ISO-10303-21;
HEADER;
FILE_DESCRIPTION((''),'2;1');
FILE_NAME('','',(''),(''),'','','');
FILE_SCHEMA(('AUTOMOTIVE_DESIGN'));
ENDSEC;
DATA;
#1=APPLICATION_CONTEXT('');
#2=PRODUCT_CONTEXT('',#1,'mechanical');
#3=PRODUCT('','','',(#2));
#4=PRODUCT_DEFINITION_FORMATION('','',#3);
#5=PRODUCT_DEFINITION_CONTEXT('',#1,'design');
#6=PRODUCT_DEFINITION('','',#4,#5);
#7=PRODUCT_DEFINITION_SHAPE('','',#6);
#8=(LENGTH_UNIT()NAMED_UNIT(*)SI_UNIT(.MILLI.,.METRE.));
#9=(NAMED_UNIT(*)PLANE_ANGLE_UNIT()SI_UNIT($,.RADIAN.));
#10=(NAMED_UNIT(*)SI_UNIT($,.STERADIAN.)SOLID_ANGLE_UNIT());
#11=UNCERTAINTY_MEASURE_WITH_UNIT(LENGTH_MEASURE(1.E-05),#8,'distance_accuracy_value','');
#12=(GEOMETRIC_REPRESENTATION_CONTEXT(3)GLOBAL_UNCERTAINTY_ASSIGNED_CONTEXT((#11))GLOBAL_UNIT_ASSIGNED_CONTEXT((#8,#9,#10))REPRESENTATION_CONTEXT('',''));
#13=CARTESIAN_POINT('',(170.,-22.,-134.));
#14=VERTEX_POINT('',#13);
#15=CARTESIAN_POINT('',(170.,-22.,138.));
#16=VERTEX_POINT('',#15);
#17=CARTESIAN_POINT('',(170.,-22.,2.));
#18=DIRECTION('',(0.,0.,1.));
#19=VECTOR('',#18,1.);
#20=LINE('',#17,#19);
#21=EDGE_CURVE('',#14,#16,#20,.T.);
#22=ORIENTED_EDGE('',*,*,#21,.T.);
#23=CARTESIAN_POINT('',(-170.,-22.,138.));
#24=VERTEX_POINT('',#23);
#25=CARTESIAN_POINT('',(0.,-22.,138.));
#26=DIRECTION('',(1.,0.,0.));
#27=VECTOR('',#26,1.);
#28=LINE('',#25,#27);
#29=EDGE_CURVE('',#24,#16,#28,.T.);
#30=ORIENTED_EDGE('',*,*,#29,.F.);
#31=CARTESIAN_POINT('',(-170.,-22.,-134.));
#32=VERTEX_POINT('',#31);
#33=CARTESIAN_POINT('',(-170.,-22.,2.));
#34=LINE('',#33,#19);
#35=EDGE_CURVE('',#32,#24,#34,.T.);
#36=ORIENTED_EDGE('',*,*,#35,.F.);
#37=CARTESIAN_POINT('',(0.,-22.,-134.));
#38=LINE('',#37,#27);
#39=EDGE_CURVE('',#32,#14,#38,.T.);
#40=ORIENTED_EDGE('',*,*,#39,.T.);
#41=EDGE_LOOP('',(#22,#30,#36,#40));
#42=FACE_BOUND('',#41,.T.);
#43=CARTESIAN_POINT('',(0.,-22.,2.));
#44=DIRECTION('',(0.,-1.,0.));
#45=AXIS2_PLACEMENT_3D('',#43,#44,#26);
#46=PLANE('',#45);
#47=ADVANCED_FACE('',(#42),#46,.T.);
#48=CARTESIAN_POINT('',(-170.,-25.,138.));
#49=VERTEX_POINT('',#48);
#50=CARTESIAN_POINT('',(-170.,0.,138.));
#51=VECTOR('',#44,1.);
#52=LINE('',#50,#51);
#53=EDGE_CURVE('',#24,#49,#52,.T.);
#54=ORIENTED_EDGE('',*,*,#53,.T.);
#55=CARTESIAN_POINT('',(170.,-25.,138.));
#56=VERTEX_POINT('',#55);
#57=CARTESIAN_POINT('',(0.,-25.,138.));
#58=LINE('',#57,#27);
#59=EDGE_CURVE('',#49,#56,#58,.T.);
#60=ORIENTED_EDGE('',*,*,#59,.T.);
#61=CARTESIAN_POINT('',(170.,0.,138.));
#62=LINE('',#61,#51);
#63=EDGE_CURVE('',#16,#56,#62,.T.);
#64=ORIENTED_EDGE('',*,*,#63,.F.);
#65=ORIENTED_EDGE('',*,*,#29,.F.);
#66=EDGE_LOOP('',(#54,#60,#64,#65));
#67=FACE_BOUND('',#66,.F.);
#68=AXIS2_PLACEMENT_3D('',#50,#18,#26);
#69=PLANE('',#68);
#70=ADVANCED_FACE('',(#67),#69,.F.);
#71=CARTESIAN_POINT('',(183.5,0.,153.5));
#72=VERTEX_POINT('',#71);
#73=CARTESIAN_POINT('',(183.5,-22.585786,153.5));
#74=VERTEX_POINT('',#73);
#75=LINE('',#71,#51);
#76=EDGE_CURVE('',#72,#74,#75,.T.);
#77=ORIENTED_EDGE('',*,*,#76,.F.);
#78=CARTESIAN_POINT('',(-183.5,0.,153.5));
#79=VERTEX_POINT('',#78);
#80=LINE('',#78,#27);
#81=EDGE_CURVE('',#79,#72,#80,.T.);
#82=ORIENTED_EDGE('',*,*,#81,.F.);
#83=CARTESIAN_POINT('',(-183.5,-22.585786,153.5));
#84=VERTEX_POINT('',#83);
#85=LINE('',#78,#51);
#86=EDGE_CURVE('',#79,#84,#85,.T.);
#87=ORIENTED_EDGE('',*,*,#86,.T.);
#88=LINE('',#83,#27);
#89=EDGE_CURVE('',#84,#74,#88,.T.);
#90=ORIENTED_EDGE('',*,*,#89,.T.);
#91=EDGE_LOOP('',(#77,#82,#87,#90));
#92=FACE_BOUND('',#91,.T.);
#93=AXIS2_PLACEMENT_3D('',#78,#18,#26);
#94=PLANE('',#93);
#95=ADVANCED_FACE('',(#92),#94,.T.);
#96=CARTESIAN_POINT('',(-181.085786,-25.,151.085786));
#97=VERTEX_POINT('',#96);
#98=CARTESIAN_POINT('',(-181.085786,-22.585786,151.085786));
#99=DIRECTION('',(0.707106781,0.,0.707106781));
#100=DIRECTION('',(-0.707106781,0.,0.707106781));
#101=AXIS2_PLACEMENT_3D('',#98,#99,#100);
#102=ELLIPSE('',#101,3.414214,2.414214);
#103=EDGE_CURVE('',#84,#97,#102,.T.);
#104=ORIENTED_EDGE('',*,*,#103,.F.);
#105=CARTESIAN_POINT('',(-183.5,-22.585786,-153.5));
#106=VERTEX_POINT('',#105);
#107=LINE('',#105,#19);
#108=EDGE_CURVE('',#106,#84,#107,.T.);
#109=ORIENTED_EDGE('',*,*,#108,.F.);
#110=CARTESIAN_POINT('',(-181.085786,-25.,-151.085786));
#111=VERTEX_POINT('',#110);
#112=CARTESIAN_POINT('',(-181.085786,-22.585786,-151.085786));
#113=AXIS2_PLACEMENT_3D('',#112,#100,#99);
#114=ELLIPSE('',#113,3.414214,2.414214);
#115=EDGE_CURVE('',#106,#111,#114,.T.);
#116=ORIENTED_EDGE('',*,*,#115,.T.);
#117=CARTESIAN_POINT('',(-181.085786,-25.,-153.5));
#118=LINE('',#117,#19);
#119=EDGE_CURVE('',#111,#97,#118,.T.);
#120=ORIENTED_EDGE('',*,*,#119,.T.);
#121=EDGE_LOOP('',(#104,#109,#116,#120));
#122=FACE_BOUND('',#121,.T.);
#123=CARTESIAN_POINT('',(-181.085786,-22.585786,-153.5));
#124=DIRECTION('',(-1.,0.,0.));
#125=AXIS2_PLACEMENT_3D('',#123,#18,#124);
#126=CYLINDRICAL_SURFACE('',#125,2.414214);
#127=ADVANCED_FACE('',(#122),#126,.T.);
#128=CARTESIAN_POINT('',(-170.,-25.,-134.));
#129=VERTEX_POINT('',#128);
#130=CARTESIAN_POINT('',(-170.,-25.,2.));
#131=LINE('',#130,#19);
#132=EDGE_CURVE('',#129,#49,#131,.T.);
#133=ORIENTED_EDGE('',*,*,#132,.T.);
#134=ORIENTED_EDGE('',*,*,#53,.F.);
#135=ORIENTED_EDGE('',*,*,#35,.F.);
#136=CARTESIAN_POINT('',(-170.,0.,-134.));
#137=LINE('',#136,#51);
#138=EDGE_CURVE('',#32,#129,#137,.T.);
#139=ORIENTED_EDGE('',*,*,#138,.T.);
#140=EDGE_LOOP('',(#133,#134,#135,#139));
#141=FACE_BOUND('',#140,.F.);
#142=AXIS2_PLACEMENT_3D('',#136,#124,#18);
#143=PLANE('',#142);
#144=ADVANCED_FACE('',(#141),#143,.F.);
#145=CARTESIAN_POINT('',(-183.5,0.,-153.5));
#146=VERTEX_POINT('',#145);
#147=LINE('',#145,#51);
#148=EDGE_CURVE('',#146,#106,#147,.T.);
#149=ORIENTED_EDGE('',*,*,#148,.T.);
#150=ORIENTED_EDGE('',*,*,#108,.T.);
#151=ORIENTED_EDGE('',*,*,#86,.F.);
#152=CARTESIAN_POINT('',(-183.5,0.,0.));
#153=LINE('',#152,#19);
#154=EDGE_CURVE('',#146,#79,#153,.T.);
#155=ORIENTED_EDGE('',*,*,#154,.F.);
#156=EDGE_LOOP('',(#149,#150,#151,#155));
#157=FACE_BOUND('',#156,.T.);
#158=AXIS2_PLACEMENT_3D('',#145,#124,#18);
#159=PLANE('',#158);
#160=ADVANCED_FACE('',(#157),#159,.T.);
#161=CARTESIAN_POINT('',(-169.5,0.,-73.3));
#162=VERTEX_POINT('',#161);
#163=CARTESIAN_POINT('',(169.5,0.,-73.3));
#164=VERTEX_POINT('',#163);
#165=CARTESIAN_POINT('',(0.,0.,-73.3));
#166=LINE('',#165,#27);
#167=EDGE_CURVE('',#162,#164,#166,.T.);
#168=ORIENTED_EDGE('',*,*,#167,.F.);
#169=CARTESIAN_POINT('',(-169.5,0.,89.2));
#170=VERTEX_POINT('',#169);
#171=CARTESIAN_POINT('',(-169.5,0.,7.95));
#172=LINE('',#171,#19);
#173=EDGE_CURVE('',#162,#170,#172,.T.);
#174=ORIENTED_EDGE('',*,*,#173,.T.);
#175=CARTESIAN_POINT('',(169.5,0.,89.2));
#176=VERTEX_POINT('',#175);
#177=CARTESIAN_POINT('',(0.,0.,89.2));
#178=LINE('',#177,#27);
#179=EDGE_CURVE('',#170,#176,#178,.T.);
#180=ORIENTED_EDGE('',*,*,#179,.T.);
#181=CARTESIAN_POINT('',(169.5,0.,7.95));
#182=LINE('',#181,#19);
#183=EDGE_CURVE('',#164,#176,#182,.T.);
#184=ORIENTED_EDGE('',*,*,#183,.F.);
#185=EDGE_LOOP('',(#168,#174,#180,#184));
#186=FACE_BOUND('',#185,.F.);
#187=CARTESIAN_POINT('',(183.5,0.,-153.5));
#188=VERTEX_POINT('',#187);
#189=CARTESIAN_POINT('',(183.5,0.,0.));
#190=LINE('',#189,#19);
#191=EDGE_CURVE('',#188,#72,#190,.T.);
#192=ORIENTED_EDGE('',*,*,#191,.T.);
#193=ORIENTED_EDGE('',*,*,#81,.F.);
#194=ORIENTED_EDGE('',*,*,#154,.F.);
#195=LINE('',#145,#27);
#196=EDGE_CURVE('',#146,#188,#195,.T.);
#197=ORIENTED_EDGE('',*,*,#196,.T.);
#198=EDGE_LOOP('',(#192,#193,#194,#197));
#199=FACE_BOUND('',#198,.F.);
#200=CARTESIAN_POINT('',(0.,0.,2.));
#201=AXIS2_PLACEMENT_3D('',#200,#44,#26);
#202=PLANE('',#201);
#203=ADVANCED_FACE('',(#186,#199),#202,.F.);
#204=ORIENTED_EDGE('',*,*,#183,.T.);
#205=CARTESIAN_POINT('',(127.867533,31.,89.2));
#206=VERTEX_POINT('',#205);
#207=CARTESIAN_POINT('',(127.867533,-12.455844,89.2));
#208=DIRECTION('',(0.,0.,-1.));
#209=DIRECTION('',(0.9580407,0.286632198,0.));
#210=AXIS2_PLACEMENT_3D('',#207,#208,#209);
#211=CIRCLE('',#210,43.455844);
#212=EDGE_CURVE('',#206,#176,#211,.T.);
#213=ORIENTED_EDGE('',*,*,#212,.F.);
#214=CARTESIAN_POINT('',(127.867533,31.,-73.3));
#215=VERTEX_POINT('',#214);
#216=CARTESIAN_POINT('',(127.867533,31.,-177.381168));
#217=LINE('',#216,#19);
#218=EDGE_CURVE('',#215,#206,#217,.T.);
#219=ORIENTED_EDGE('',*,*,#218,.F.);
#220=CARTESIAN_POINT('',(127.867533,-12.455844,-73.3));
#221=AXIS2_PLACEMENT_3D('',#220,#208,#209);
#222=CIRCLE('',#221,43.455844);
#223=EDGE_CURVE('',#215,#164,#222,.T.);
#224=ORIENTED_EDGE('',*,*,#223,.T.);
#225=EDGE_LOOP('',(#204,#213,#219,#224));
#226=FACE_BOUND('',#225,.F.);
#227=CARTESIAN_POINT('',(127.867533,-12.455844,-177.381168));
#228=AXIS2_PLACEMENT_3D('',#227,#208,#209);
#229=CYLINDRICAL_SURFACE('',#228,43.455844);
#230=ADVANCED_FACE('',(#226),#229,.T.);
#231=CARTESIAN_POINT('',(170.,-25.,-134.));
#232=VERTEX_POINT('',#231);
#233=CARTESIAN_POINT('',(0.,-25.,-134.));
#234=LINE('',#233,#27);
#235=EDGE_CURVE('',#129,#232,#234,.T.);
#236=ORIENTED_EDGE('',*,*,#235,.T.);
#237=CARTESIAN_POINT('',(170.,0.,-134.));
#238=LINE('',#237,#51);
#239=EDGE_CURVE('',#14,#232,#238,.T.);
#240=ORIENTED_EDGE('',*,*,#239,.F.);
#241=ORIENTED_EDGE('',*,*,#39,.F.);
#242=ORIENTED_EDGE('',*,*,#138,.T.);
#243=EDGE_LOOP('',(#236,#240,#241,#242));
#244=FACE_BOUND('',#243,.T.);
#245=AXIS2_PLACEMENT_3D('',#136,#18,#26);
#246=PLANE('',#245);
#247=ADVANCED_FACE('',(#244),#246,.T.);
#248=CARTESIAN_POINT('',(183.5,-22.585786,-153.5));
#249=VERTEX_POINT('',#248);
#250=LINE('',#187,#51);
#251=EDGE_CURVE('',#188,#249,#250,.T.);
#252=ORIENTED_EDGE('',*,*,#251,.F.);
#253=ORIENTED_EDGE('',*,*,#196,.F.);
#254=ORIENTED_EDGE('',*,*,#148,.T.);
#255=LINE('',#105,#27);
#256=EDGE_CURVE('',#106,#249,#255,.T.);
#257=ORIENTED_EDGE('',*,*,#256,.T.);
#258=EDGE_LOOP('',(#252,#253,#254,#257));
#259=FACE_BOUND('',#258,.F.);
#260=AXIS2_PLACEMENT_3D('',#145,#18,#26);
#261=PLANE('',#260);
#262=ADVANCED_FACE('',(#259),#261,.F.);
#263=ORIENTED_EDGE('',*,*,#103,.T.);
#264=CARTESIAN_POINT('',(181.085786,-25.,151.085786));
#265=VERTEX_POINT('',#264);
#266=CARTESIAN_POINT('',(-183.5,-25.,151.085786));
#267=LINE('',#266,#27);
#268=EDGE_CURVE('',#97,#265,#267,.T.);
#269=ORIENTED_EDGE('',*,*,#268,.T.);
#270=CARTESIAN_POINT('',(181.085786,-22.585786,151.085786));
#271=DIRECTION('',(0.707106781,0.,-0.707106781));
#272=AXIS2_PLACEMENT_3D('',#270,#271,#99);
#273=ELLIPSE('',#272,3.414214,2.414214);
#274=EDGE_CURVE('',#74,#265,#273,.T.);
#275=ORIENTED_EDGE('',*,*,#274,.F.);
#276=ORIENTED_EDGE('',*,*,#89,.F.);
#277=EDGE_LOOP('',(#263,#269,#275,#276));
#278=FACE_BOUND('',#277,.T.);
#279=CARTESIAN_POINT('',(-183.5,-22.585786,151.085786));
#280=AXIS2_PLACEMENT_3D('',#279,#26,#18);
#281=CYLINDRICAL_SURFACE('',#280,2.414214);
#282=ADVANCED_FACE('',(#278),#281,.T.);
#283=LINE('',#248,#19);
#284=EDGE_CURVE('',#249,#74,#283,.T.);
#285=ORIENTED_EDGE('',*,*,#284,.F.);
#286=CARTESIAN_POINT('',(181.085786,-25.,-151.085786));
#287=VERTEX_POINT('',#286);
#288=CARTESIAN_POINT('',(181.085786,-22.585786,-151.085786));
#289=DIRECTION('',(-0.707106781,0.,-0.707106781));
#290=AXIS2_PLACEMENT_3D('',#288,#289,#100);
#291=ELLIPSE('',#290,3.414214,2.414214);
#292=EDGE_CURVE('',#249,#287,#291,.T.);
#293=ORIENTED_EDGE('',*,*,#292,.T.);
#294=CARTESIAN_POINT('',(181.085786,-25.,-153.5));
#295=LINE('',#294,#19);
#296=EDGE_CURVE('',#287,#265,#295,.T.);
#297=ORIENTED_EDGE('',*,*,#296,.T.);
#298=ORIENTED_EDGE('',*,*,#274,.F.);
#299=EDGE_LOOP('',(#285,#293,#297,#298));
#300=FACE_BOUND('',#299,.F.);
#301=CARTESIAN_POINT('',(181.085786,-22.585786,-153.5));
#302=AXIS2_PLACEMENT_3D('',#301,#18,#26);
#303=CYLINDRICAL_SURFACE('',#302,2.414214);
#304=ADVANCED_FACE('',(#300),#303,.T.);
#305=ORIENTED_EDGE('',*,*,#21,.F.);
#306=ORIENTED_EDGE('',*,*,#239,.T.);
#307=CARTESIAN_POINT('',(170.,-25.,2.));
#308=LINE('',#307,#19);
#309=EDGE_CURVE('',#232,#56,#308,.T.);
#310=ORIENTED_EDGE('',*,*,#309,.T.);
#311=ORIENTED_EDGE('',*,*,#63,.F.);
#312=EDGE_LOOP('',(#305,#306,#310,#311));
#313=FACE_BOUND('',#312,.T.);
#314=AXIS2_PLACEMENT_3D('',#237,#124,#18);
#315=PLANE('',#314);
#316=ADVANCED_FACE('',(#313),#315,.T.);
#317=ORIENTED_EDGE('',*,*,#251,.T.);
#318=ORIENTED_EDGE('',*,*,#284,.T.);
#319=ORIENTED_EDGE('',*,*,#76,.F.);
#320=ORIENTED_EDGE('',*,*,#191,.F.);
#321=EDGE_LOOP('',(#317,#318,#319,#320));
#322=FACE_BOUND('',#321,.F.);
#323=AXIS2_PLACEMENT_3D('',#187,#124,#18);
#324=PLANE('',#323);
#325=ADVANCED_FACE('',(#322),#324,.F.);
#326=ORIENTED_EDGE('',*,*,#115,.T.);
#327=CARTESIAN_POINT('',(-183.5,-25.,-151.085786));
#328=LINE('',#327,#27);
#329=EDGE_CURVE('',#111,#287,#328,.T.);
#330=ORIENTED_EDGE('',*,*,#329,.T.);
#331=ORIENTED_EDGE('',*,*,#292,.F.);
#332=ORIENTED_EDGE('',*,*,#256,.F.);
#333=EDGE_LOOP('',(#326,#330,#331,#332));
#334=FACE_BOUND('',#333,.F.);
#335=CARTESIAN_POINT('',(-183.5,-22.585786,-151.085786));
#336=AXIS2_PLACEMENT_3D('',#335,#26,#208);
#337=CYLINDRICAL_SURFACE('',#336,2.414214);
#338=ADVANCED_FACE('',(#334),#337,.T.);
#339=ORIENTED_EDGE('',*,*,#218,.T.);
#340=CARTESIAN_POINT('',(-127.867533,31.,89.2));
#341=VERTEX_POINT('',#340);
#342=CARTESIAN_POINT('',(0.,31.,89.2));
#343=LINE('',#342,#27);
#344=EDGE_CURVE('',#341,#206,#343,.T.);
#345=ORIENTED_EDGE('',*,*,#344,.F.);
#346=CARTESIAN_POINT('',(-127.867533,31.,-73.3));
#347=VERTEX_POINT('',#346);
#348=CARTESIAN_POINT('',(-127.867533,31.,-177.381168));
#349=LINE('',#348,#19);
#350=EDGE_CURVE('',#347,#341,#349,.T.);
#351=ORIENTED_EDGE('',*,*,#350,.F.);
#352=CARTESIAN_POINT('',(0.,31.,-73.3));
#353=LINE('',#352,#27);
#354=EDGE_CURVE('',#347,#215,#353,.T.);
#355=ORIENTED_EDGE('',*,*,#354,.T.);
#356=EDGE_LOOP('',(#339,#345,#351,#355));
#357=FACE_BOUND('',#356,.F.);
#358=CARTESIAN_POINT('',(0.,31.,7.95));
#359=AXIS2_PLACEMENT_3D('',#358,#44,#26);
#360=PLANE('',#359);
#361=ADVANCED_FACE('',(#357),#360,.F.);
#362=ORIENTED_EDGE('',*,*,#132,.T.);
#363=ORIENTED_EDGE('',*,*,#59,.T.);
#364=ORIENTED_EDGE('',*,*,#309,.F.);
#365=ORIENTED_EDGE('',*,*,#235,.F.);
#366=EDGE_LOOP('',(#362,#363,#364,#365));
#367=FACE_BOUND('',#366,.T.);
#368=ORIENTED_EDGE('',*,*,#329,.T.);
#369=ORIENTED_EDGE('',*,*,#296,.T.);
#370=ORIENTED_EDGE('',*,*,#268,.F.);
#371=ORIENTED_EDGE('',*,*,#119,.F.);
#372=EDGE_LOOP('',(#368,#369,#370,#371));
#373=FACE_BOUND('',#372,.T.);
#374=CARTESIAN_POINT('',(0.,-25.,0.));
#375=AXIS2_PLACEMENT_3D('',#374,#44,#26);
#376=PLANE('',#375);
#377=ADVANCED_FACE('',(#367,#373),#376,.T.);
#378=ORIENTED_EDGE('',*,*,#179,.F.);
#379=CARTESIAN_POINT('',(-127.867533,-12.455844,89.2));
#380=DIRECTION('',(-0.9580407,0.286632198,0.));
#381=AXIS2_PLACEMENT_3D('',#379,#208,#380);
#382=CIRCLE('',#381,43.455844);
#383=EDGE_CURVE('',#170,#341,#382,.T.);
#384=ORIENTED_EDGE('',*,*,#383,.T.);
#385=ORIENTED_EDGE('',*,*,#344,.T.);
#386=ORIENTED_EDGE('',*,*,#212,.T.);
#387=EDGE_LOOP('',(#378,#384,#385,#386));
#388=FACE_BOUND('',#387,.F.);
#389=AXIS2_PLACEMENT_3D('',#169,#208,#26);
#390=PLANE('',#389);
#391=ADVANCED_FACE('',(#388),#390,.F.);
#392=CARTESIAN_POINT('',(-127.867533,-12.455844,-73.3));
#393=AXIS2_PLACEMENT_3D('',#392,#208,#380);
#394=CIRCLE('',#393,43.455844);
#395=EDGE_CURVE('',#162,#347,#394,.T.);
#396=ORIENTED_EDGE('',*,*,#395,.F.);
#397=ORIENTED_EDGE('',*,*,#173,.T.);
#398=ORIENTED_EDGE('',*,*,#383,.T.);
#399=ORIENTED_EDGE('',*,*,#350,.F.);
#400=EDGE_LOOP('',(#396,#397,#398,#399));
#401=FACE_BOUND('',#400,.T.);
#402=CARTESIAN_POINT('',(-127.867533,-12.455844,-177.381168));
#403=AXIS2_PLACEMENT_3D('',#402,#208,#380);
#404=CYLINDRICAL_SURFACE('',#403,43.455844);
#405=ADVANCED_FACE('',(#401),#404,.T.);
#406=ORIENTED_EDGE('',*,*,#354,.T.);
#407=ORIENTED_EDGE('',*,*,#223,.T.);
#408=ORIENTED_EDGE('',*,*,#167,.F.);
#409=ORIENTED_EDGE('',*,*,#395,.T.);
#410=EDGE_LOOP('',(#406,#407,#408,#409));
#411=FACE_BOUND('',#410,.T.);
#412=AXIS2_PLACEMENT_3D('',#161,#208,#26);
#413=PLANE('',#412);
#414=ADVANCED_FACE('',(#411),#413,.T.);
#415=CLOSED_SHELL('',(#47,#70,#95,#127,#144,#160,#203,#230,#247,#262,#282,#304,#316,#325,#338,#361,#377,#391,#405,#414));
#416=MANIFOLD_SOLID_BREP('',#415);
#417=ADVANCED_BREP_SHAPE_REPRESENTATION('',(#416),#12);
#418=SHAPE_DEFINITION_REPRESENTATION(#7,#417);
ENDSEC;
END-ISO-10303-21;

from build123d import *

# Parameters (mm, degrees)
F0_W        = 367
F0_H        = 307
F0_W_2      = 340
F0_H_2      = 272
F1_DEPTH    = 25
F2_DEPTH    = 22
F3_R        = 2.4142135624
F4_W        = 339
F4_H        = 162.5
F5_DEPTH    = 31
F6_T1_DEPTH = 370.6623366275


# Not quite as in the source:
# - a fillet or chamfer that OpenCascade refuses, or shapes differently, is made with other operations: its cross-section is extruded or revolved along the edge and cut away or added


with BuildPart() as f1:
    # F0 (on Front) → F1 (new body)
    with BuildSketch(Plane.XZ):
        Rectangle(F0_W, F0_H)
        with Locations((0, 2)):
            Rectangle(F0_W_2, F0_H_2, mode=Mode.SUBTRACT)
    extrude(amount=F1_DEPTH)

    # F0 (on Front) → F2 (join)
    with BuildSketch(Plane.XZ):
        with Locations((0, 2)):
            Rectangle(F0_W_2, F0_H_2)
    extrude(amount=F2_DEPTH)

    # F3
    f3_edges = [f1.edges().sort_by_distance(p)[0] for p in [
        (-183.5, -25, 0),
        (183.5, -25, 0),
        (0, -25, 153.5),
        (0, -25, -153.5),
    ]]
    fillet(f3_edges, radius=F3_R)

    # F4 (on face) → F5 (join)
    with BuildSketch(Plane.XZ):
        with Locations((0, 7.95)):
            Rectangle(F4_W, F4_H)
    extrude(amount=-F5_DEPTH)

    # F6: fillet of radius 43.4558441227 on 2 edges, made by hand

    # F6_s2 → F6_t1 (cut)
    with BuildSketch(Plane.XY.offset(-177.3811683137)):
        with BuildLine():
            ThreePointArc((169.5, 0), (153.820674756, 22.3987797386), (127.8675326745, 31))
            Line((127.8675326745, 31), (169.5, 31))
            Line((169.5, 31), (169.5, 0))
        make_face()
        with BuildLine():
            ThreePointArc((-169.5, 0), (-153.820674756, 22.3987797386), (-127.8675326745, 31))
            Line((-127.8675326745, 31), (-169.5, 31))
            Line((-169.5, 31), (-169.5, 0))
        make_face()
    extrude(amount=F6_T1_DEPTH, mode=Mode.SUBTRACT)


solid = f1.part
